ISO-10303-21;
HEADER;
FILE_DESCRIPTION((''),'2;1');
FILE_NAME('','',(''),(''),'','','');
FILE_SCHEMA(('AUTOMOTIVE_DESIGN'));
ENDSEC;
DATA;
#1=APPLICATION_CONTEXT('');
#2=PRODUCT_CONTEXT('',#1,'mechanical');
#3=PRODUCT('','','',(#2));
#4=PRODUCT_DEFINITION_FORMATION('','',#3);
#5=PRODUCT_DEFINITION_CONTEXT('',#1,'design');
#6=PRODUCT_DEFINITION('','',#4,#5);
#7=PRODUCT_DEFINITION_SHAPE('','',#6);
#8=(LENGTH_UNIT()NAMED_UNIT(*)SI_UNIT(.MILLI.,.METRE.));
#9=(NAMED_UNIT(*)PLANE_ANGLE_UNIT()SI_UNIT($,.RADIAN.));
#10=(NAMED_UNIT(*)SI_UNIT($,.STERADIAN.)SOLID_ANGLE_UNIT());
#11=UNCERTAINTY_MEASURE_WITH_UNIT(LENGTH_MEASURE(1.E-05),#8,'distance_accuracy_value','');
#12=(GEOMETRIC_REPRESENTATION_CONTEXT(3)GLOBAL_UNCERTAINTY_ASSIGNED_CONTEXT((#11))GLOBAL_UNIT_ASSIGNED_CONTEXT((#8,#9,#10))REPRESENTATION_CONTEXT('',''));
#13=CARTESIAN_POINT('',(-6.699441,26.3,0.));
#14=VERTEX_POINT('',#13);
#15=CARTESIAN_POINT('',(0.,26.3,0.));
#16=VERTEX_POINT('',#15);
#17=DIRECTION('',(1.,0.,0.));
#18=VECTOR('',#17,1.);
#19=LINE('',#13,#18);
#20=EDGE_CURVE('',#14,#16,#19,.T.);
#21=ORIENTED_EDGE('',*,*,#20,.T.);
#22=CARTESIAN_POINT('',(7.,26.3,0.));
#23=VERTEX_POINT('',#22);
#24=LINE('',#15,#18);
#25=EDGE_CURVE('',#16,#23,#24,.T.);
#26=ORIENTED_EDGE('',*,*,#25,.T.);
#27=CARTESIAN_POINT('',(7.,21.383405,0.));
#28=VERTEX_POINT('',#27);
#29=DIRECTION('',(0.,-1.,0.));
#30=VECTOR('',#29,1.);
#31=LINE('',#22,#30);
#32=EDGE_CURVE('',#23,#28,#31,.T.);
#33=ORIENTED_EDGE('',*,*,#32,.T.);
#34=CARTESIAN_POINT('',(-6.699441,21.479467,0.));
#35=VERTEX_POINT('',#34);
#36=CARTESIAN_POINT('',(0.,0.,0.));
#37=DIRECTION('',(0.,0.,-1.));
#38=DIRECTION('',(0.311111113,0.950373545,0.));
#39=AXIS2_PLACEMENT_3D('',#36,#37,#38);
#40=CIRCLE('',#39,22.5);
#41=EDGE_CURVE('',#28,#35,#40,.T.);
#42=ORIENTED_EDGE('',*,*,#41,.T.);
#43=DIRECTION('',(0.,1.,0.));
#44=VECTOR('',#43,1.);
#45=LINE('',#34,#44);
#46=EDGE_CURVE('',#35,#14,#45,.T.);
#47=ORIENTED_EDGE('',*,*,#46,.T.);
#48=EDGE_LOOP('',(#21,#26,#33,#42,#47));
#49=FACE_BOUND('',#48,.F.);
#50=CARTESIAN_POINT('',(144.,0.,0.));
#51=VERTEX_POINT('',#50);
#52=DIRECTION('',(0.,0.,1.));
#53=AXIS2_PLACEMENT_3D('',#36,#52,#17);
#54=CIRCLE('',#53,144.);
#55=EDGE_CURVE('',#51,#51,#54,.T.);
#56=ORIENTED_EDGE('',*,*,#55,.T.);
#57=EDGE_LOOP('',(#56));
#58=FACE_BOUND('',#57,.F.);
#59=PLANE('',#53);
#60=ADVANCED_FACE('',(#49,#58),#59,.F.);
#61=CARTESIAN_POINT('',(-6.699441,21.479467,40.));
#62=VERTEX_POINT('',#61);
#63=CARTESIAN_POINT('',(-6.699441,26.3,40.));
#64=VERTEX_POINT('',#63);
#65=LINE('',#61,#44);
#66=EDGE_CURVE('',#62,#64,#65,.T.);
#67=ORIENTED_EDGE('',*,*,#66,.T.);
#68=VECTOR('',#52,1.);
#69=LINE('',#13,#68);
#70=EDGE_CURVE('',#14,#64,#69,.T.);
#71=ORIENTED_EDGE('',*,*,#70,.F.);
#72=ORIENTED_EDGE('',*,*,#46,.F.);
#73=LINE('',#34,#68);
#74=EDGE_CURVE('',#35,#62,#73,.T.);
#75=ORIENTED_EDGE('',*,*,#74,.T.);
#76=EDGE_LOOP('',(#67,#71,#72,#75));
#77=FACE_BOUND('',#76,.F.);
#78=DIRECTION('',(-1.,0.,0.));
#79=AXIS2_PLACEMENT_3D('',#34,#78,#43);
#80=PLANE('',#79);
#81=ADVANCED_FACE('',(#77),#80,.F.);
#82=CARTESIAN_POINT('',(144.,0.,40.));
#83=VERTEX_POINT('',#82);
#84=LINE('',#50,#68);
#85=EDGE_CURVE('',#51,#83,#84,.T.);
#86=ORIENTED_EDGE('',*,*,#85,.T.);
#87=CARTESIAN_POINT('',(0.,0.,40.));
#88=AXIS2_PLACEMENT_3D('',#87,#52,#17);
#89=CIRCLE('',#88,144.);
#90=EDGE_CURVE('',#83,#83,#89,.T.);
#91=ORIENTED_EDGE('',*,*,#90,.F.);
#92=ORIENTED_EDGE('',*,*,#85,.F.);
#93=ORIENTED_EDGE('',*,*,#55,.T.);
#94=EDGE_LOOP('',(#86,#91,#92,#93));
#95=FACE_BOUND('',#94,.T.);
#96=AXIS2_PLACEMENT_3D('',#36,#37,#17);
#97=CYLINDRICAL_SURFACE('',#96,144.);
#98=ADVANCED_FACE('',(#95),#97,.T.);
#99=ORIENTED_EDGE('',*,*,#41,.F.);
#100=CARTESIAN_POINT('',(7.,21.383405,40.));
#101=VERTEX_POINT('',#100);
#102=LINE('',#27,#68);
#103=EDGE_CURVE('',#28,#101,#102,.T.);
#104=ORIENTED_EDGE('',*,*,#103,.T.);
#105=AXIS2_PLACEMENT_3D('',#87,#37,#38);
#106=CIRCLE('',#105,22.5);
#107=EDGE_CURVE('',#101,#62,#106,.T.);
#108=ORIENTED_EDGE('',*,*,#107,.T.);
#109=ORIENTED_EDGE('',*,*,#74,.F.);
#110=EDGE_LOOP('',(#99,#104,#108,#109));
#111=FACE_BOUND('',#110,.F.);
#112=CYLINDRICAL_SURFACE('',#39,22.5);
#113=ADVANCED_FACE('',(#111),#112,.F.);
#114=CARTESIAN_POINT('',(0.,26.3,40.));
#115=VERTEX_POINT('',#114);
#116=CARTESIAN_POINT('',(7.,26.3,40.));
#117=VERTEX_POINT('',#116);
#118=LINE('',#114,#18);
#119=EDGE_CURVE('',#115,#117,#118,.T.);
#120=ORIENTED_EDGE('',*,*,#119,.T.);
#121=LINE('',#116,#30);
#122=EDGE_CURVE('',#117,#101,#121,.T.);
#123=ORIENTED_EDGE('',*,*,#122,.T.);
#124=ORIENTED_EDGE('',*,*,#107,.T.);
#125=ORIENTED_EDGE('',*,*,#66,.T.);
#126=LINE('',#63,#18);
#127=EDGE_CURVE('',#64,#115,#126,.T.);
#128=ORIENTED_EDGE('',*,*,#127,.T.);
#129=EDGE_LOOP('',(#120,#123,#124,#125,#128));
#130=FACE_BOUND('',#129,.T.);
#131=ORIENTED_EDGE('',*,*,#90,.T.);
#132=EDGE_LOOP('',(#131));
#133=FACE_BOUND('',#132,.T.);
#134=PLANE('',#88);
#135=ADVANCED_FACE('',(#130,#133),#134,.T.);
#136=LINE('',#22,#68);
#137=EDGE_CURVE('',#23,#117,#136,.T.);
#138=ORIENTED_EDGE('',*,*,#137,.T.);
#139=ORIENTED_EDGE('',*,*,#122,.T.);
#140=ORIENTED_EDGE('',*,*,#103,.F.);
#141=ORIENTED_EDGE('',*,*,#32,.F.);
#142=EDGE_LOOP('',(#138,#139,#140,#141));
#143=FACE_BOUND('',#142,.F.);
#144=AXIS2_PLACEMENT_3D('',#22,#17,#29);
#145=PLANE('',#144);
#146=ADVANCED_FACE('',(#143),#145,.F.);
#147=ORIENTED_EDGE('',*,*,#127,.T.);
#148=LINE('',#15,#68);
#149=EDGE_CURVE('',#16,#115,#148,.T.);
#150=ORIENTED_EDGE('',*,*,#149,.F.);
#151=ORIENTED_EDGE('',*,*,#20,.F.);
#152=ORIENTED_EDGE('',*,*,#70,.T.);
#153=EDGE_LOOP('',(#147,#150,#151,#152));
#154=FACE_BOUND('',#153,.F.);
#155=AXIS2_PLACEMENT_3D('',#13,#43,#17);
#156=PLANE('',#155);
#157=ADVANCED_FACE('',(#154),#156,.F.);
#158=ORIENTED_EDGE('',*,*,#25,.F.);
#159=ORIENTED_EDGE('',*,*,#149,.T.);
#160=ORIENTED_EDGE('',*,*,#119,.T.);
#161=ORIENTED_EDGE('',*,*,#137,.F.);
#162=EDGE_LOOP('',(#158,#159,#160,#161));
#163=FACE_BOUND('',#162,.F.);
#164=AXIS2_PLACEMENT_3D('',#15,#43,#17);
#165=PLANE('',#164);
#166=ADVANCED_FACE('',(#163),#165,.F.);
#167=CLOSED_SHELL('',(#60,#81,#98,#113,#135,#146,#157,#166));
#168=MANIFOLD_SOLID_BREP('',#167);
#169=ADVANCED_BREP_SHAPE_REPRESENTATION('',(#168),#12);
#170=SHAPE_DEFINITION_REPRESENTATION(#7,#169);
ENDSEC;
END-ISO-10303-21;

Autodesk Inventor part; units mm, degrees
ref_plane "YZ Plane" through (0, 0, 0) normal (1, 0, 0) x (0, 1, 0)
ref_plane "XZ Plane" through (0, 0, 0) normal (0, 1, 0) x (-1, 0, 0)
ref_plane "XY Plane" through (0, 0, 0) normal (0, 0, 1) x (1, 0, 0)
sketch "スケッチ1" plane through (0, 0, 0) normal (0, 0, 1) x (1, 0, 0)
  circle A0 centre (0, 0) radius 144
  arc A1 (-6.699441, 21.479467) -> (7, 21.383405) centre (0, 0) ccw
  line L0 (0, 22.5) -> (0, 17)
  line L1 (0, 22.5) -> (0, 26.3)
  line L2 (0, 26.3) -> (7, 26.3)
  line L3 (7, 26.3) -> (7, 21.383405)
  line L4 (7, 17) -> (0, 17)
  line L5 (-6.699441, 21.479467) -> (-6.699441, 26.3)
  line L6 (-6.699441, 26.3) -> (0, 26.3)
  circle A2 centre (0, 0) radius 135 construction
  circle A3 centre (0, 0) radius 131.55695 construction
  circle A4 centre (0, 0) radius 140 construction
  line L7 (0, 0) -> (139.964753, 3.141329)
  line L8 (0, 0) -> (140, 0) construction
  line L9 (0, 0) -> (134.981058, 2.261433)
  arc A5 (131.55695, 0) -> (131.538491, 2.203757) centre (0, 0) ccw
  line L10 (150.184159, 7.263201) -> (152.050707, -0.299145)
  line L11 (119.584335, 0) -> (125.15167, 0)
  circle A6 centre (0, 0) radius 131.55695 construction
  line L12 (0, 0) -> (134.981058, -2.261433)
  line L13 (150.184159, -7.263201) -> (152.050707, 0.299145)
  arc A7 (131.538491, -2.203757) -> (131.55695, 0) centre (0, 0) ccw
  line L14 (143.93152, 4.440455) -> (146.480822, 0.114106)
  line L15 (146.480822, 0.114106) -> (143.93152, -4.440455)
  line L16 (134.979291, 2.261403) -> (134.981058, 2.261433)
  line L17 (134.907008, -2.260192) -> (135.074128, -2.262992)
  line L18 (143.93152, -4.440455) -> (144.436873, -3.537595)
  line L19 (143.93152, 4.440455) -> (145.266584, 2.433754)
  line L20 (145.266584, 2.433754) -> (146.480822, 0.114106)
  line L21 (131.538491, 2.203757) -> (134.981058, 2.261433)
  line L22 (131.538491, -2.203757) -> (135.074128, -2.262992)
  line L23 (131.570586, -2.204295) -> (131.538491, -2.203757)
  arc A8 (131.538491, -2.203757) -> (131.538491, -2.203757) centre (131.538491, -2.203757) ccw
  line L24 (131.7018, 2.206493) -> (131.538491, 2.203757)
  dimension "d7" = 270
  dimension "d9" = 280
  dimension "d0" = 288
  dimension "d1" = 45
  dimension "d2" = 5.5
  dimension "d3" = 3.8
  dimension "d4" = 7
  dimension "d8" = 263.1139
  dimension "d18" = 1.28571
  dimension "d19" = 0
sketch "スケッチ1 outline for 押し出し1" plane through (0, 0, 0) normal (0, 0, 1) x (1, 0, 0)
  circle A0 centre (0, 0) radius 144
  line L0 (0, 26.3) -> (7, 26.3)
  line L1 (-6.699441, 26.3) -> (0, 26.3)
  line L2 (-6.699441, 21.479467) -> (-6.699441, 26.3)
  arc A1 (7, 21.383405) -> (-6.699441, 21.479467) centre (0, 0) cw
  line L3 (7, 26.3) -> (7, 21.383405)
extrude "押し出し1" add sketch "スケッチ1 outline for 押し出し1" along normal blind 40
sketch "スケッチ2" plane through (0, 0, 0) normal (0, 0, -1) x (-1, 0, 0)
  point P0 (0, 0)
properties part number "gear2"
